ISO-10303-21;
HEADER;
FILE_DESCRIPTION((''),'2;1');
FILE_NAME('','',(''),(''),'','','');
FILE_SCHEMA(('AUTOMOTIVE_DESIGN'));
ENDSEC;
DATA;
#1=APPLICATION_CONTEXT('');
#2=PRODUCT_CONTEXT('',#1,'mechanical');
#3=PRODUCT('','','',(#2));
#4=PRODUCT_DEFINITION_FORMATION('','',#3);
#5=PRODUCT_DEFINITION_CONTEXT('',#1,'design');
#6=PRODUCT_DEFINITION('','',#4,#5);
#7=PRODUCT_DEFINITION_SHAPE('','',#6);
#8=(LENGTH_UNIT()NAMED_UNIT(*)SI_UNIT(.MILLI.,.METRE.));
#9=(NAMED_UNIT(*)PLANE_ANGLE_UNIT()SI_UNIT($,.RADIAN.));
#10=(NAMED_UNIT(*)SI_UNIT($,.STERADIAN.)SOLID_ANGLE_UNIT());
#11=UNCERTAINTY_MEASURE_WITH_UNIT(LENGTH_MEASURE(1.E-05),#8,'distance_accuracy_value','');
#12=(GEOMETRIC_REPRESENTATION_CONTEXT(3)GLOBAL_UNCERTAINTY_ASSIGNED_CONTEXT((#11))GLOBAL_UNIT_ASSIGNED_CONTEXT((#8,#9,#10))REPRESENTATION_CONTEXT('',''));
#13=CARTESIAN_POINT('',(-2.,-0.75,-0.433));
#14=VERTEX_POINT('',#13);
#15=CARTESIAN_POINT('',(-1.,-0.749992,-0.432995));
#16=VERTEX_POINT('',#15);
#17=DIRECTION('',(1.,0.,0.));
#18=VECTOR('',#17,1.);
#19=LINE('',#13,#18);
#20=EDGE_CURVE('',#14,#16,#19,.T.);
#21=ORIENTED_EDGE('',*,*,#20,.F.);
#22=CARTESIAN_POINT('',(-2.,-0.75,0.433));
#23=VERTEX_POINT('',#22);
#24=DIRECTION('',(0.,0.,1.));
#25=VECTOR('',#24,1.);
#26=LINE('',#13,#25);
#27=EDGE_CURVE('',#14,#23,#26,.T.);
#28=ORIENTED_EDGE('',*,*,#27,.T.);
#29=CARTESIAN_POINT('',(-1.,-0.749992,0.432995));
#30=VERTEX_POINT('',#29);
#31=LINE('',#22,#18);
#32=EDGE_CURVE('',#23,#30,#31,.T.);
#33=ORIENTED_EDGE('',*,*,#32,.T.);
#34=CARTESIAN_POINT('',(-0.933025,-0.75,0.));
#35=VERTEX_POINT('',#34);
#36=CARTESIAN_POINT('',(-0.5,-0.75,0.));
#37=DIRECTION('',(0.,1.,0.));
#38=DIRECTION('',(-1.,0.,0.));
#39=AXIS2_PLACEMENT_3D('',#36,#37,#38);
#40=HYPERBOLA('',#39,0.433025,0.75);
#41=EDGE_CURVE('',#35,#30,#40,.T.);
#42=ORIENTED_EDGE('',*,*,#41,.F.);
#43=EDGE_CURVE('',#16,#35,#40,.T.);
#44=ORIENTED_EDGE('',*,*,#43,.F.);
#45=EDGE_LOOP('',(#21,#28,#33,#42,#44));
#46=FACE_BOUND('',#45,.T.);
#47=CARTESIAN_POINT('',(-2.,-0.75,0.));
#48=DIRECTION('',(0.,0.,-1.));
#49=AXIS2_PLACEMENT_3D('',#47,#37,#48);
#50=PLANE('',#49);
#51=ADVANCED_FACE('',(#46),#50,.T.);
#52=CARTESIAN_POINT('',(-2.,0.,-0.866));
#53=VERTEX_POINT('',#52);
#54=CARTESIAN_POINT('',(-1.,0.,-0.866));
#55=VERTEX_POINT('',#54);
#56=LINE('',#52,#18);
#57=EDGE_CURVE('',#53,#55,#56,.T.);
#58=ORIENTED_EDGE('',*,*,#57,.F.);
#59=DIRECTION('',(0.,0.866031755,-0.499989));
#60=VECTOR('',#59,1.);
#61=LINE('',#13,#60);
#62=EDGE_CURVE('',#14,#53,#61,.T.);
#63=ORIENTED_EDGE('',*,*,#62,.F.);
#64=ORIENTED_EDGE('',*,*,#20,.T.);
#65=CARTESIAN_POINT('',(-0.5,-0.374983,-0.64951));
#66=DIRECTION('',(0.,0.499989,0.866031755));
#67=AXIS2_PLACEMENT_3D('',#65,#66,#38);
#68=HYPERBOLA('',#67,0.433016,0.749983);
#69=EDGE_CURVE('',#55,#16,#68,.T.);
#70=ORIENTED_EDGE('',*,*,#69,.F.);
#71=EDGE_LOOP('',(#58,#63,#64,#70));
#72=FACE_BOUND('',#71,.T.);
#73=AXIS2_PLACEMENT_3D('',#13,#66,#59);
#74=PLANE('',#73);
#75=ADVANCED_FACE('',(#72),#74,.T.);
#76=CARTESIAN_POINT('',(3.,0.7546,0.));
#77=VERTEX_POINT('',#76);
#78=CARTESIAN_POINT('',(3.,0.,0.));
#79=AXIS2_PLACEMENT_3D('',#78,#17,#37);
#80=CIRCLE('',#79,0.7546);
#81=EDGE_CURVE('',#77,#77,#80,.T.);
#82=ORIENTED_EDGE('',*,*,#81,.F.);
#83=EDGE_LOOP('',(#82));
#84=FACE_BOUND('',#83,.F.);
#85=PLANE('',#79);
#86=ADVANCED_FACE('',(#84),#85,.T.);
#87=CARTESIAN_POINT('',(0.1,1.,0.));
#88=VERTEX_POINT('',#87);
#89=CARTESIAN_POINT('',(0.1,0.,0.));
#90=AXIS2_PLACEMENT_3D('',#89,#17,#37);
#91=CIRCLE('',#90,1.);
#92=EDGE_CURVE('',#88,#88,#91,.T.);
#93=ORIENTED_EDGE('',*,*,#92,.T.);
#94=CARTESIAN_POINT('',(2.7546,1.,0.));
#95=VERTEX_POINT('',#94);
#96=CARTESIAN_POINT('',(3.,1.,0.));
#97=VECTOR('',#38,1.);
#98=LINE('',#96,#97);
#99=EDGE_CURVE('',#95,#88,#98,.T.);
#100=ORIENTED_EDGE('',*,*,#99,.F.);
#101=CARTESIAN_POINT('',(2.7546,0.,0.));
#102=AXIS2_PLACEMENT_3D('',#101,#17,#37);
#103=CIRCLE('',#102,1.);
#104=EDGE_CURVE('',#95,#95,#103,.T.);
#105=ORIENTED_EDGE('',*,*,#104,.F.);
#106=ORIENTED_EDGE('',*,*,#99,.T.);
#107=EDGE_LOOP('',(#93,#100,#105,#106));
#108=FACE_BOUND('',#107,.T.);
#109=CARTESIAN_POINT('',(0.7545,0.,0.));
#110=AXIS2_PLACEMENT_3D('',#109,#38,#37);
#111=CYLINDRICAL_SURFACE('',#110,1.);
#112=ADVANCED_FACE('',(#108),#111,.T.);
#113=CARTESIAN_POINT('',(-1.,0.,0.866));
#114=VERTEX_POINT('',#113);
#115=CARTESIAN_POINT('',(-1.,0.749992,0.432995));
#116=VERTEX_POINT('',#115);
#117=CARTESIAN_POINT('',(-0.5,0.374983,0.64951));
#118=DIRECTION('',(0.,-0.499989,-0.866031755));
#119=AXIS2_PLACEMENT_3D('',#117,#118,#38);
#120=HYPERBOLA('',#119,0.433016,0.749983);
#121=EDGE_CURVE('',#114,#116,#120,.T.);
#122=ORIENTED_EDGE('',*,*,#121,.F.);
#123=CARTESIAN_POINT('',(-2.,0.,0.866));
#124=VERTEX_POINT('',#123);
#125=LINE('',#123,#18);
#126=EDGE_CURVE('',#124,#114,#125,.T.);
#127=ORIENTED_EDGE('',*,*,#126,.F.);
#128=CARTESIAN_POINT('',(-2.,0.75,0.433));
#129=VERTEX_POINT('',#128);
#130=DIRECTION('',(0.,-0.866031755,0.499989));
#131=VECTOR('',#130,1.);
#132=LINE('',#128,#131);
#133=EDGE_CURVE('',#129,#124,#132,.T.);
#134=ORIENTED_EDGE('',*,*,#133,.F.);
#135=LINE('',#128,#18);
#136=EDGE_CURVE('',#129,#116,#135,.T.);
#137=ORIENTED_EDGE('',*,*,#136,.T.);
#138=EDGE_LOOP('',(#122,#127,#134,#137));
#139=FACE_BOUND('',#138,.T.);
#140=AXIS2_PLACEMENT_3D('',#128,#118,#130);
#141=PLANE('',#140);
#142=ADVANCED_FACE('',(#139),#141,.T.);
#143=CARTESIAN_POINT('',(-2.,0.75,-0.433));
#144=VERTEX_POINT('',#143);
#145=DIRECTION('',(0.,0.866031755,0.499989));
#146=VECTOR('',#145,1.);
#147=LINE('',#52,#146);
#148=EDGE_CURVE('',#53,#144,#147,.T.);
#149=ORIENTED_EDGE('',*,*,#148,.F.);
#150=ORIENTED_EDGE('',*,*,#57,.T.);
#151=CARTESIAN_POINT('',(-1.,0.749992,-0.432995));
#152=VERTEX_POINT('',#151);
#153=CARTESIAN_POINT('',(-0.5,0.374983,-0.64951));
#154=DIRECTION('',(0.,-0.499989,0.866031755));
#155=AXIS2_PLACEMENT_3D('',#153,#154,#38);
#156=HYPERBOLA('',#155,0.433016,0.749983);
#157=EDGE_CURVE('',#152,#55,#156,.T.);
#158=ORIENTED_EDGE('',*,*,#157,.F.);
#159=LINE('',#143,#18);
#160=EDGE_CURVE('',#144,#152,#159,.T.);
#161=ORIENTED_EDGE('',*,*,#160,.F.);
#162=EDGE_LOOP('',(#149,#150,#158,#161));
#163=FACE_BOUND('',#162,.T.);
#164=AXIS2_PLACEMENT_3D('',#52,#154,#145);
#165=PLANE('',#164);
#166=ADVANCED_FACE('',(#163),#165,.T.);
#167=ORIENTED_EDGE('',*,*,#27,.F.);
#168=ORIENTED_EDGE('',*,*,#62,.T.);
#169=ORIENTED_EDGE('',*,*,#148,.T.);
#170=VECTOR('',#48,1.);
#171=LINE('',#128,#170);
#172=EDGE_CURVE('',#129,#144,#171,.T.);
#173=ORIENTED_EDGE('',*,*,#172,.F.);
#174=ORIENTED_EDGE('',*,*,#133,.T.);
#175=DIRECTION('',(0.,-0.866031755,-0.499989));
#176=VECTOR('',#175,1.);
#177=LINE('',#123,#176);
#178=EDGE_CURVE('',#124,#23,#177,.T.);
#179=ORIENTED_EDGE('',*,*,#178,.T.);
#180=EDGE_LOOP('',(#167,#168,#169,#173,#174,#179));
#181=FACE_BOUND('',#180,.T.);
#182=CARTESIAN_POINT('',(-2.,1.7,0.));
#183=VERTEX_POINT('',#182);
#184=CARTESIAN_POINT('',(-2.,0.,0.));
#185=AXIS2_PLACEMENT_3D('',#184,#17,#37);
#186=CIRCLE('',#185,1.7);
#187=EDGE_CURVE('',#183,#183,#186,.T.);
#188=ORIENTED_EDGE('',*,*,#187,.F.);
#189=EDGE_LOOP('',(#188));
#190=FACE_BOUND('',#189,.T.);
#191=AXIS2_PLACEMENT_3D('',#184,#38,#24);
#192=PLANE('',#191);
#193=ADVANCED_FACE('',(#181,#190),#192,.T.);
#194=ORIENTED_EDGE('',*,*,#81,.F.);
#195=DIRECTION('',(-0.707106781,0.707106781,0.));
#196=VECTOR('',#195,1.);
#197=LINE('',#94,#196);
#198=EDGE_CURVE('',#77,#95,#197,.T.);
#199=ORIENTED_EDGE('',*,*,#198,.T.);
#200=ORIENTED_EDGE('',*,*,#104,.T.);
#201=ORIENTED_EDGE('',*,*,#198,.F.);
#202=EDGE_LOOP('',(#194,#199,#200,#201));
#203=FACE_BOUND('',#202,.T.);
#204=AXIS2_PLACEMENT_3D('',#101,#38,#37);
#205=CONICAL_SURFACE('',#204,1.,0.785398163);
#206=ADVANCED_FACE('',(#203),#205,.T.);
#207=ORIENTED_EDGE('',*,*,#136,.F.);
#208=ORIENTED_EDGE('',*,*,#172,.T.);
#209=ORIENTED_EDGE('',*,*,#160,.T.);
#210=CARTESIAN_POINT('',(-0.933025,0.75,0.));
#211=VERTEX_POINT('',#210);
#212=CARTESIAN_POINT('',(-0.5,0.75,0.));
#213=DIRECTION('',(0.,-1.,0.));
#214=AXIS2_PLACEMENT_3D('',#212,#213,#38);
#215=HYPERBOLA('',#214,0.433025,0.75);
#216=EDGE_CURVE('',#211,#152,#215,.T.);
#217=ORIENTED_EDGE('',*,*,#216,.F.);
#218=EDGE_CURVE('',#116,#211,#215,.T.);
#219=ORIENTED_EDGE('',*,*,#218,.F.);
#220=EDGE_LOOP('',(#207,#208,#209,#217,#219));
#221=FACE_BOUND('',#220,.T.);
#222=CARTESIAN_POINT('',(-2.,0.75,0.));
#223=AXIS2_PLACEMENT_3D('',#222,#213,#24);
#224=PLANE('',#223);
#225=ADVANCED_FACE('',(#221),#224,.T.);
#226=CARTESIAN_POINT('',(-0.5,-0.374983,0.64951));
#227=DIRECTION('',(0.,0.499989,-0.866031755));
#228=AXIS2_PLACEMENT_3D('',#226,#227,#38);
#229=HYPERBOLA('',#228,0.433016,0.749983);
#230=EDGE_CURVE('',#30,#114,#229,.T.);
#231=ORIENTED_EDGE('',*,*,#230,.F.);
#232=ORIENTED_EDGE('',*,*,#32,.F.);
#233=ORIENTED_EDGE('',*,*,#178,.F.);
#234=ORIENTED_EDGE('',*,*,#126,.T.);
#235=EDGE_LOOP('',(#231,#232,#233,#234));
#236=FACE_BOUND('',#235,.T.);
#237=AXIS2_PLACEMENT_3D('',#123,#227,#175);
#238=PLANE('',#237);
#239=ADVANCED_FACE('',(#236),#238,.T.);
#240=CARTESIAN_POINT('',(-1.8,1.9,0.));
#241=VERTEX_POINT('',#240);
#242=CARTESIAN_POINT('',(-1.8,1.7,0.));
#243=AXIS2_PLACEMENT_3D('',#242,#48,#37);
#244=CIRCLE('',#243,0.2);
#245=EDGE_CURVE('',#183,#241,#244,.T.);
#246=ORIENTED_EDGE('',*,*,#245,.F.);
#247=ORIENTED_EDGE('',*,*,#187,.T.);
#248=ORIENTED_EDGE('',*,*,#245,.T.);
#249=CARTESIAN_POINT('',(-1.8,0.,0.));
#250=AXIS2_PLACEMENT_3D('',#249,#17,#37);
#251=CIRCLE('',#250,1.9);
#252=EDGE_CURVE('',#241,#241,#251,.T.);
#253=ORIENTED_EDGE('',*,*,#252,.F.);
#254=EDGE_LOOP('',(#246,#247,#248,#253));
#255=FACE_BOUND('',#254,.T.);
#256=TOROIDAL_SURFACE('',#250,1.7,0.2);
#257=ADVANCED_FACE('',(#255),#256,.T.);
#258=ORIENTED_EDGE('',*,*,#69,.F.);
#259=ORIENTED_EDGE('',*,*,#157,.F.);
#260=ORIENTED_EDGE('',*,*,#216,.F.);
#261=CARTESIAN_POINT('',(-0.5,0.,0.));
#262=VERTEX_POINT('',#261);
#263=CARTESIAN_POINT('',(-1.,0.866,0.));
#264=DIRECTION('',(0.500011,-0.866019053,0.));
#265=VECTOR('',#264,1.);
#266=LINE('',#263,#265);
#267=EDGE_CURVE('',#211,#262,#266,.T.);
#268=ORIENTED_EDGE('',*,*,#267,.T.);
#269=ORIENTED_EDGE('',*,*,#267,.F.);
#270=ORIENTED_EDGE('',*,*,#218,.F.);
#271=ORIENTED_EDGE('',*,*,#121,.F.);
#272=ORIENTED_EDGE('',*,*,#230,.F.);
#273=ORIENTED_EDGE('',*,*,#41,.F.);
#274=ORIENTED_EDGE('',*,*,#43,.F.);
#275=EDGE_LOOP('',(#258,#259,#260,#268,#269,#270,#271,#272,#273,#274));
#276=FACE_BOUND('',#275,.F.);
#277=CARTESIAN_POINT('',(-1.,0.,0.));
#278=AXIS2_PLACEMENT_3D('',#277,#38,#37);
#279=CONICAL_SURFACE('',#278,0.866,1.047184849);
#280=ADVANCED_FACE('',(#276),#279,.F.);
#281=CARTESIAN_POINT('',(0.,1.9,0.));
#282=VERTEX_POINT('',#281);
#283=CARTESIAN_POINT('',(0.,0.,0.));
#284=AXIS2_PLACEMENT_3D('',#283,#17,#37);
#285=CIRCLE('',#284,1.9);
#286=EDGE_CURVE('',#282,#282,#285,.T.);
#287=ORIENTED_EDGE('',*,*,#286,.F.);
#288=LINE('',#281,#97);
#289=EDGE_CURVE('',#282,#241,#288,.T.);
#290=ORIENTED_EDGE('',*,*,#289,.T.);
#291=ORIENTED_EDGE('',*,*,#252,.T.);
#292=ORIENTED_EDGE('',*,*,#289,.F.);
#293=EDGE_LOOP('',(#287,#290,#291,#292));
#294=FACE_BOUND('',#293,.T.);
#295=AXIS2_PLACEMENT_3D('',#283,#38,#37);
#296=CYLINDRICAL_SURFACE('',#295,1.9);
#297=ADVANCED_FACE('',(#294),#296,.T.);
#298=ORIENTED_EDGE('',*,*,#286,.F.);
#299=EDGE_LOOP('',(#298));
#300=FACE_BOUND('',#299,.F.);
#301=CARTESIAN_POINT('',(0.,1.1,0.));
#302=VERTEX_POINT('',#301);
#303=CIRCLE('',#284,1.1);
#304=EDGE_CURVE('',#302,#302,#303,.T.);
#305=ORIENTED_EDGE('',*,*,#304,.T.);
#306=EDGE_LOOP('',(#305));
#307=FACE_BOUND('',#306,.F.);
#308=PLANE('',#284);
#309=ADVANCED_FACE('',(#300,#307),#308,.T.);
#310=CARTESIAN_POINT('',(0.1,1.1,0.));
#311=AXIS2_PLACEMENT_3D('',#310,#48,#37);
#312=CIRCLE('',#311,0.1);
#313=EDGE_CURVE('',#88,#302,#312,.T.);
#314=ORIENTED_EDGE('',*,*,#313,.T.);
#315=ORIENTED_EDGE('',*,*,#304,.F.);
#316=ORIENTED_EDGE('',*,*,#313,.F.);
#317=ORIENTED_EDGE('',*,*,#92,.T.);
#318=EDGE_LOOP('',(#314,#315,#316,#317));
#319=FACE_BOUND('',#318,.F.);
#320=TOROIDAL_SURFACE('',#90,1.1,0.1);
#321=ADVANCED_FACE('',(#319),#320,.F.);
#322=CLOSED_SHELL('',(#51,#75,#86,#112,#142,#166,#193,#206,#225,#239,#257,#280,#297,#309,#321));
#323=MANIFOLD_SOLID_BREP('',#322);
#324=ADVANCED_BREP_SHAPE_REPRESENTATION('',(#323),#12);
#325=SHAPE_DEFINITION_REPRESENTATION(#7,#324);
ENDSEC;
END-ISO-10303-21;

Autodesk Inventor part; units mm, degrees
ref_plane "YZ Plane" through (0, 0, 0) normal (1, 0, 0) x (0, 1, 0)
ref_plane "XZ Plane" through (0, 0, 0) normal (0, 1, 0) x (-1, 0, 0)
sketch "Skizze1" plane through (0, 0, 0) normal (0, 0, 1) x (1, 0, 0)
  line L0 (-0.5, 0) -> (3, 0)
  line L1 (3, 0) -> (3, 1)
  line L2 (3, 1) -> (1, 1)
  line L3 (1, 1) -> (0.7545, 1)
  line L4 (0.7545, 1) -> (0, 1)
  line L5 (0, 1) -> (0, 1.9)
  line L6 (0, 1.9) -> (-2, 1.9)
  line L7 (-2, 1.9) -> (-2, 0.866)
  line L8 (-2, 0.866) -> (-1, 0.866)
  line L9 (-1, 0.866) -> (-0.5, 0)
  line L10 (-3, 0) -> (4, 0) projected
  line L11 (0, -0.38) -> (0, 2.28) projected
  line L12 (1, 1) -> (0, 1) construction
  dimension "d1" = 2
  dimension "d2" = 0.2455
  dimension "d3" = 2
  dimension "d4" = 1
  dimension "d5" = 60
  dimension "d6" = 2
  dimension "d7" = 2
  dimension "d8" = 1.7321
  dimension "d9" = 3.8
  dimension "d26" = 3
revolve "Körper" add sketch "Skizze1" angle 360 about axis through (-0.5, 0, 0) along (1, 0, 0)
sketch "Skizze2" plane through (-2, 0, 0) normal (-1, 0, 0) x (0, 0, 1)
  circle A0 centre (0, 0) radius 0.866 projected
  line L0 (0, -2.66) -> (0, 2.66) projected
  line L1 (-2.66, 0) -> (2.66, 0) projected
  line L2 (0.866, 0) -> (0.433, -0.75)
  line L3 (0.433, -0.75) -> (-0.433, -0.75)
  line L4 (-0.433, -0.75) -> (-0.866, 0)
  line L5 (-0.866, 0) -> (-0.433, 0.75)
  line L6 (-0.433, 0.75) -> (0.433, 0.75)
  line L7 (0.433, 0.75) -> (0.866, 0)
extrude "Loch" add sketch "Skizze2" against normal up to next contours L7 A0 | A0 L2 | L6 L0 A0 | A0 L0 L3 | L0 L6 A0 | A0 L3 L0 | L4 A0 | A0 L5
fillet "Rundung1" radius 0.2 1 edges at (-2, -1.9, 0)
thread "Gewinde" size "M2x0.4" class "6g" standard "ISO Metric profile" length 2
chamfer "Fase1" distance 0.2454 distance2 0.2454 1 edges at (3, -1, 0) measured on face at (3, -0.4588, -0.3309)
ref_plane "Work Plane1" through (29, 0, 0) normal (0, -1, 0) x (1, 0, 0)
fillet "Fillet2" radius 0.1 1 edges at (0, -1, 0)
equation "\"d1\" = GEL"
equation "\"d3\" = KOH"
equation "\"d4\" = INTI"
equation "\"d6\" = GD"
equation "\"d7\" = BDM"
equation "\"d8\" = 1.1547 * SW"
equation "\"d9\" = KOD"
equation "\"d26\" = NLG"
equation "\"d30\" = R"
equation "\"d17\" = RR"
equation "\"d13\" = GEL"
equation "\"d15\" = -0.5 * SPD + 0.5 * GD"
equation "\"d16\" = GUL"
equation "\"GD\" = NND"
equation "\"NLG\" = 3"
equation "\"GEL\" = 2"
equation "\"KOD\" = 3.8"
equation "\"KOH\" = 2"
equation "\"INTI\" = 1"
equation "\"GAL\" = 0.61345 * PTC"
equation "\"GUL\" = 0.61345 * PTC"
equation "\"BDM\" = NND"
equation "\"SW\" = 1.5"
equation "\"RR\" = 0.2"
equation "\"SPD\" = NND - 1.2269 * PTC"
equation "\"R\" = 0.1"
equation "\"TOA\" = 30deg"
equation "\"GD1\" = THREADDIA - 1.2269 * PTC"
equation "\"THREADDIA\" = 2"
equation "\"FAWI\" = 45deg"
equation "\"ANG\" = 120deg"
equation "\"PTC\" = 0.4"
equation "\"NND\" = 2"
equation "\"E0\" = 1.155 * SW"
properties part number "DIN 912 - M2 x 3" material "Stahl, weich"
